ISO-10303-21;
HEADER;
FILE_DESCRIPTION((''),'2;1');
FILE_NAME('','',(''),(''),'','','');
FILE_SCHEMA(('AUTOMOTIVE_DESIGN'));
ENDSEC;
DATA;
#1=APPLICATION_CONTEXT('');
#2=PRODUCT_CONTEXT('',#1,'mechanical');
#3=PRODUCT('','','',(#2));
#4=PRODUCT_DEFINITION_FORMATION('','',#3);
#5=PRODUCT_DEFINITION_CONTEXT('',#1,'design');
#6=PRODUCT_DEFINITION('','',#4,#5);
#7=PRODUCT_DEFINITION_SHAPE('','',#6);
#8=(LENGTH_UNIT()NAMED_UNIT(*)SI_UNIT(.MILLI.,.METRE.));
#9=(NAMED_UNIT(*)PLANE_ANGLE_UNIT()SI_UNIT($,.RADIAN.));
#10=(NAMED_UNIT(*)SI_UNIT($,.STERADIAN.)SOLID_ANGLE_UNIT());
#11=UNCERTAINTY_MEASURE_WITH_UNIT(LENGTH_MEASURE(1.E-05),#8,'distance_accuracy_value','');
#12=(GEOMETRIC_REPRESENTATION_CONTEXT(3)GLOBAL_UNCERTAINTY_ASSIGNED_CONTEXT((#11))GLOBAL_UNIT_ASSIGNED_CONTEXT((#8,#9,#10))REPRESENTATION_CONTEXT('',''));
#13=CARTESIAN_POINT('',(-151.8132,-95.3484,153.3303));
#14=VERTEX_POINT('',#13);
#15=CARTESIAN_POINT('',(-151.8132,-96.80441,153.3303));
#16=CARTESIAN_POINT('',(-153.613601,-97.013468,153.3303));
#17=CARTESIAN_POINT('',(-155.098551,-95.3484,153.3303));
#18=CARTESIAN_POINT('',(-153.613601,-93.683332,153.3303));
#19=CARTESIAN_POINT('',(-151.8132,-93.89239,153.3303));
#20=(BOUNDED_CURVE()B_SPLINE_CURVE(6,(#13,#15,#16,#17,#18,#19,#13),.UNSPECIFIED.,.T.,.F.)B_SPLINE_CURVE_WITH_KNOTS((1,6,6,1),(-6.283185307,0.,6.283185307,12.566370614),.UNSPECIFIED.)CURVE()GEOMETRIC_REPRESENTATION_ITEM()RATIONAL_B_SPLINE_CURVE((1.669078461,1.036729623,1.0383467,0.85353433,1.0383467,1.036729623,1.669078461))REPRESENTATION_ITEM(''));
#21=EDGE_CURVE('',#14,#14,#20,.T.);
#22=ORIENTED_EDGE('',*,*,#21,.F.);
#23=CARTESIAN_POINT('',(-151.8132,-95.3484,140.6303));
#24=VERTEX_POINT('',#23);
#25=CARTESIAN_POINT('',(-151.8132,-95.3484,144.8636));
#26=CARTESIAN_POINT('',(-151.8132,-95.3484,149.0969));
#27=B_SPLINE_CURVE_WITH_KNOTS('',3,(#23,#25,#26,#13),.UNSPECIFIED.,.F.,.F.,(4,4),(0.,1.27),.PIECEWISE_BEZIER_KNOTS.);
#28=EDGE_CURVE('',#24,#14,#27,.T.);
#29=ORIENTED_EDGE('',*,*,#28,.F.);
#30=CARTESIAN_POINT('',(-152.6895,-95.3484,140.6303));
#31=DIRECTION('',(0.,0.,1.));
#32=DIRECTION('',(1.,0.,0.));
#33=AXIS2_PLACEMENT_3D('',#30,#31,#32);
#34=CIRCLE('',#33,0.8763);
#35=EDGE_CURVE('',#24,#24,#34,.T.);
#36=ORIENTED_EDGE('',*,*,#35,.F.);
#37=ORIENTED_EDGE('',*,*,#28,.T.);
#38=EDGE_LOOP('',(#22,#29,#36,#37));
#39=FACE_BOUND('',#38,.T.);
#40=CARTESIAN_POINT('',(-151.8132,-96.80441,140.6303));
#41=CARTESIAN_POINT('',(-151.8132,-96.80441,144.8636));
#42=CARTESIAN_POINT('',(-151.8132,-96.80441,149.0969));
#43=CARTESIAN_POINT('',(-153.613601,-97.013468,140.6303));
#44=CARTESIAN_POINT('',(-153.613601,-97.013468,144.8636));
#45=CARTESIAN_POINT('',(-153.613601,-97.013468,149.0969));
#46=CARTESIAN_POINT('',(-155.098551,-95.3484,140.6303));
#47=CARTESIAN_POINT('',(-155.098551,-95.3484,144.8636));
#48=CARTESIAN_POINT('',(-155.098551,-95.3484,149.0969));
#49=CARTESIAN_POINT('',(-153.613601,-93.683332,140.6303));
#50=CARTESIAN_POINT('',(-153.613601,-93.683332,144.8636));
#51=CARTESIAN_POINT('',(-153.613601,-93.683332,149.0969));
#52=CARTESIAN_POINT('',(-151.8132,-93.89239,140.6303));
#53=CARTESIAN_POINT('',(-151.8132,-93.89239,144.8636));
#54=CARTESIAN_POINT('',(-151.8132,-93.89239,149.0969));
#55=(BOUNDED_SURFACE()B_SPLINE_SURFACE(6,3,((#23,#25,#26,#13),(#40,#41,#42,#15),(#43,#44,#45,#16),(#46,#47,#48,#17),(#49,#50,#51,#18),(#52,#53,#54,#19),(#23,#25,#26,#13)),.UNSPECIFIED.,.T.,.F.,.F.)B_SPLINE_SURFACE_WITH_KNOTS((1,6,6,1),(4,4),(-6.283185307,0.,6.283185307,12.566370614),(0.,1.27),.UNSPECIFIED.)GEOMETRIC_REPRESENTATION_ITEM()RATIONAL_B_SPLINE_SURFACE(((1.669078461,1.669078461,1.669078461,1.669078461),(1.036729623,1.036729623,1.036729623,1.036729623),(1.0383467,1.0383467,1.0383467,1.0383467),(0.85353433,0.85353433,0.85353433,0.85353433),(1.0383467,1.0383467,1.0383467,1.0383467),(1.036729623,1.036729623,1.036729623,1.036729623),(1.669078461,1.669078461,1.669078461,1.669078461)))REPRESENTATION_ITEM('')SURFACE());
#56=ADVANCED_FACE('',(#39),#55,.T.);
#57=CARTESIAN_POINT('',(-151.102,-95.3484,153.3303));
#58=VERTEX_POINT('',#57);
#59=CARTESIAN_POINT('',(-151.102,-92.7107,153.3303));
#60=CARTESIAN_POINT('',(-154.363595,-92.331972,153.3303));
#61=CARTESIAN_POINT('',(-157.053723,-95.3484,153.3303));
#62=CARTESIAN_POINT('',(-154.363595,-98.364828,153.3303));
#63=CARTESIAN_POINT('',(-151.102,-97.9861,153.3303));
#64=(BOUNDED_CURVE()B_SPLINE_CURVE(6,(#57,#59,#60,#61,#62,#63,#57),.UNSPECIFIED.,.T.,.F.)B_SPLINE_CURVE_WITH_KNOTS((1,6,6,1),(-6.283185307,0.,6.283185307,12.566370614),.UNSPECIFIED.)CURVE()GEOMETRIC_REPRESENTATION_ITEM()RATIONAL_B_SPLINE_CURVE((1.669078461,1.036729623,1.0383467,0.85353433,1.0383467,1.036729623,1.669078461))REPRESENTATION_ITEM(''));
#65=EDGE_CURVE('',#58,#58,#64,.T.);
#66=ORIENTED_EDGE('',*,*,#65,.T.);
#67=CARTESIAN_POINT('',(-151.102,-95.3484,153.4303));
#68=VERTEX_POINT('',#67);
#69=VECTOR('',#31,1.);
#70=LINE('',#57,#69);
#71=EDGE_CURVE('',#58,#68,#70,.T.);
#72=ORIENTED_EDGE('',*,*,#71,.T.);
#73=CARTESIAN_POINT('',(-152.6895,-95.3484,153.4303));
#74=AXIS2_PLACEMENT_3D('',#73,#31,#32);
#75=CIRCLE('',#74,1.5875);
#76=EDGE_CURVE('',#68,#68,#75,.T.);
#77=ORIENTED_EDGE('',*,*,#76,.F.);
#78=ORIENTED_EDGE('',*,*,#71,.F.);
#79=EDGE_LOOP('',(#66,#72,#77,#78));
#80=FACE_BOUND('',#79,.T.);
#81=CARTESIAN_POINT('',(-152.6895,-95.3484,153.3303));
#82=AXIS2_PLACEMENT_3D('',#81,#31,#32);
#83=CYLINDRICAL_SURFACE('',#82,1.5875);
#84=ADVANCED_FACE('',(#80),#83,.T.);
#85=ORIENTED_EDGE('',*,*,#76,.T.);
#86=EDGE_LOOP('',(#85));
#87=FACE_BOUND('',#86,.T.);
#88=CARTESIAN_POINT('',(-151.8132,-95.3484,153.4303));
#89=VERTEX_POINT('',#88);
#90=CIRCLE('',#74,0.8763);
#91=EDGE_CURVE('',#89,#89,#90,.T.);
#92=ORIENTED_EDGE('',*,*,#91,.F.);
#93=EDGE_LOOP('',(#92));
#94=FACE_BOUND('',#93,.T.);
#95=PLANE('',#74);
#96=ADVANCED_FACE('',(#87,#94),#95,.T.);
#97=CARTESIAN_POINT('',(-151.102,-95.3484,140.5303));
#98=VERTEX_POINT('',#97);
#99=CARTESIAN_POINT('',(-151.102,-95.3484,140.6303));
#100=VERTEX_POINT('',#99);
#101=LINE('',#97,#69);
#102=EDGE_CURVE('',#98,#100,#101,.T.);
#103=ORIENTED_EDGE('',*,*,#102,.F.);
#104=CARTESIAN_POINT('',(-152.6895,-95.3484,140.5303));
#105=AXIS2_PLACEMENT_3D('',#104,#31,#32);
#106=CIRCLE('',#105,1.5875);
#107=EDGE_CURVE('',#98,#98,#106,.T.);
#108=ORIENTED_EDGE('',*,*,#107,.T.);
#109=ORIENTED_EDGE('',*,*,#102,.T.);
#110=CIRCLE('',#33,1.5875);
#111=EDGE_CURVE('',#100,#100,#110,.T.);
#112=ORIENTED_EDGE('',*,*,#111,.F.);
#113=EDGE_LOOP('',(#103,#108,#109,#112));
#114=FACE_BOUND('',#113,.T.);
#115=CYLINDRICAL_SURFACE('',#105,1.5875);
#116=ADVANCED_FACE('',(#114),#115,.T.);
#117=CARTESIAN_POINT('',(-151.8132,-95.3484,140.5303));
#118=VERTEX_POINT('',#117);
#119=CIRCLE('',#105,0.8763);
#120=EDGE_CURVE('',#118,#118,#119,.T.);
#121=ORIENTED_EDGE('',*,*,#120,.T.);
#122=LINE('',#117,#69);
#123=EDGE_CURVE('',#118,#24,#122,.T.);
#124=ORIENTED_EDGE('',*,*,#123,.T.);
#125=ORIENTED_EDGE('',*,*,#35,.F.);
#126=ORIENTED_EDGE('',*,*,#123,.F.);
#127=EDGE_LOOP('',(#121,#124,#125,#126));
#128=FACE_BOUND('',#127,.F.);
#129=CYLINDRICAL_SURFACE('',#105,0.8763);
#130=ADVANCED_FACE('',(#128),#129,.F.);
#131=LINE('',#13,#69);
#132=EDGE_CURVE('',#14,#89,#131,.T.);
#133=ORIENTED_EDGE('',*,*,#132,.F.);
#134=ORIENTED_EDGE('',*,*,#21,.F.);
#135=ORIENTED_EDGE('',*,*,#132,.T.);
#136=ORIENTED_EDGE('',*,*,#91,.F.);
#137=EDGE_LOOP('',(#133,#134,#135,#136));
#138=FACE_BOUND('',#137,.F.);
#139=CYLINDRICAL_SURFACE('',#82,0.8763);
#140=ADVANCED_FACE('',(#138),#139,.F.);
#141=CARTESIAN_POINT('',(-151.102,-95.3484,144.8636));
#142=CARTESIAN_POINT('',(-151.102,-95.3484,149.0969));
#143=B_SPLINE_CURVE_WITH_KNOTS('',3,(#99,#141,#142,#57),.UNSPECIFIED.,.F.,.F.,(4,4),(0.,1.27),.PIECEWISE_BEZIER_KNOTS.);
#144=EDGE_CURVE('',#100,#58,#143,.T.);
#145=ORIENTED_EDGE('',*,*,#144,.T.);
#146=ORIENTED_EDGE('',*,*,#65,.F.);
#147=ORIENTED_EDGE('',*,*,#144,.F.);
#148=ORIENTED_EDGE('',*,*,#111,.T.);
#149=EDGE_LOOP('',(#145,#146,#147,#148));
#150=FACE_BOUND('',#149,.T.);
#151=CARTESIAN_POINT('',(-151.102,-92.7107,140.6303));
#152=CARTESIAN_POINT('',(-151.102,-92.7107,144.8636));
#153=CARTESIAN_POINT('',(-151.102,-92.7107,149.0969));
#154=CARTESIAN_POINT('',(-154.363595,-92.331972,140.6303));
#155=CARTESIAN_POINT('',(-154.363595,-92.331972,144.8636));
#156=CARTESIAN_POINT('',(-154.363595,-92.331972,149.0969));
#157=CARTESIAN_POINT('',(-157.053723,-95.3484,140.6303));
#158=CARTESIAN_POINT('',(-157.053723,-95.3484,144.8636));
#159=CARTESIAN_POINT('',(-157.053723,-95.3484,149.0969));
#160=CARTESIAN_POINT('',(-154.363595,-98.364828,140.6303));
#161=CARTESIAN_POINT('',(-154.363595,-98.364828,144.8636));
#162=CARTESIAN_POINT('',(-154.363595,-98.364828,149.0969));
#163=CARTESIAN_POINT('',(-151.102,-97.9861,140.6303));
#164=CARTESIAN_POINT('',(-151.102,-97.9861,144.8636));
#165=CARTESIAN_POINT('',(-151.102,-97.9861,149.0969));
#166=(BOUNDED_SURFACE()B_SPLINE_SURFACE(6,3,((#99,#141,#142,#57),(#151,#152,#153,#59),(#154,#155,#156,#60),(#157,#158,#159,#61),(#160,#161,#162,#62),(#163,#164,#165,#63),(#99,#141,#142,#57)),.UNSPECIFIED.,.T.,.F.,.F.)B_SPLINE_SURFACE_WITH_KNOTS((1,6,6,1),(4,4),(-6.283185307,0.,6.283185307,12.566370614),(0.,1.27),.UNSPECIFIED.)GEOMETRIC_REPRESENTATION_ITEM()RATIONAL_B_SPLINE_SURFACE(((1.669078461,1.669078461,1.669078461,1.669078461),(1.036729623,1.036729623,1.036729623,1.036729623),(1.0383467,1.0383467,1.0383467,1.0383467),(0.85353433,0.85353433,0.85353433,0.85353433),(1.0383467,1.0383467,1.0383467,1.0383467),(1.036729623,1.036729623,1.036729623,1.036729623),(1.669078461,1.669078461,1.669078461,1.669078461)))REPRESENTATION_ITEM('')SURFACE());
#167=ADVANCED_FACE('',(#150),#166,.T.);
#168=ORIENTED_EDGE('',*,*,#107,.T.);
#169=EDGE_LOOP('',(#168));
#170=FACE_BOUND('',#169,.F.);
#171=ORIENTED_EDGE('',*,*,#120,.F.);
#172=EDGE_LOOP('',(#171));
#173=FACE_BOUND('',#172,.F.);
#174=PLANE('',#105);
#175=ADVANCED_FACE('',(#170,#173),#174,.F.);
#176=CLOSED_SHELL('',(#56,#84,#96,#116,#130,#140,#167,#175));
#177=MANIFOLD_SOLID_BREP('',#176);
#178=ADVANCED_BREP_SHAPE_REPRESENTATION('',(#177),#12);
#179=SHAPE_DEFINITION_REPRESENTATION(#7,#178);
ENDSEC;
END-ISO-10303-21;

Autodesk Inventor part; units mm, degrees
ref_plane "YZ Plane" through (0, 0, 0) normal (1, 0, 0) x (0, 1, 0)
ref_plane "XZ Plane" through (0, 0, 0) normal (0, 1, 0) x (-1, 0, 0)
ref_plane "XY Plane" through (0, 0, 0) normal (0, 0, 1) x (1, 0, 0)
ref_plane "Work Plane3" through (-152.6895, -95.3484, 140.6303) normal (0, 0, 1) x (1, 0, 0)
sketch "Sketch3" plane through (-152.6895, -95.3484, 140.6303) normal (0, 0, 1) x (1, 0, 0)
  circle A0 centre (0, 0) radius 1.5875
  circle A1 centre (0, 0) radius 0.8763
sketch3d "3D Sketch1"
  line L0 (-152.6895, -95.3484, 140.5303) -> (-152.6895, -95.3484, 140.6303)
  spline S0 degree 3 poles (-152.6895, -95.3484, 140.6303) (-152.6895, -95.3484, 144.8636) (-152.6895, -95.3484, 149.0969) (-152.6895, -95.3484, 153.3303) knots 0 0 0 0 1.27 1.27 1.27 1.27
  line L1 (-152.6895, -95.3484, 153.3303) -> (-152.6895, -95.3484, 153.4303)
  dimension "d88" = 1
  dimension "d89" = 1
sweep "Sweep1" add profiles "Sketch3" path "3D Sketch1"
equation "\"OD\" = 3.175"
equation "\"t\" = 0.7112"
equation "\"L\" = PL"
equation "\"ID\" = 1.7526"
equation "\"PL\" = 12.7"
equation "\"D\" = 12.7"
equation "\"Size_Designation\" = 1.2345"
equation "\"RPL\" = 12.7"
equation "\"OPL\" = 12.7"
equation "\"ROPL\" = 12.7"
properties material "PVC-Piping"
